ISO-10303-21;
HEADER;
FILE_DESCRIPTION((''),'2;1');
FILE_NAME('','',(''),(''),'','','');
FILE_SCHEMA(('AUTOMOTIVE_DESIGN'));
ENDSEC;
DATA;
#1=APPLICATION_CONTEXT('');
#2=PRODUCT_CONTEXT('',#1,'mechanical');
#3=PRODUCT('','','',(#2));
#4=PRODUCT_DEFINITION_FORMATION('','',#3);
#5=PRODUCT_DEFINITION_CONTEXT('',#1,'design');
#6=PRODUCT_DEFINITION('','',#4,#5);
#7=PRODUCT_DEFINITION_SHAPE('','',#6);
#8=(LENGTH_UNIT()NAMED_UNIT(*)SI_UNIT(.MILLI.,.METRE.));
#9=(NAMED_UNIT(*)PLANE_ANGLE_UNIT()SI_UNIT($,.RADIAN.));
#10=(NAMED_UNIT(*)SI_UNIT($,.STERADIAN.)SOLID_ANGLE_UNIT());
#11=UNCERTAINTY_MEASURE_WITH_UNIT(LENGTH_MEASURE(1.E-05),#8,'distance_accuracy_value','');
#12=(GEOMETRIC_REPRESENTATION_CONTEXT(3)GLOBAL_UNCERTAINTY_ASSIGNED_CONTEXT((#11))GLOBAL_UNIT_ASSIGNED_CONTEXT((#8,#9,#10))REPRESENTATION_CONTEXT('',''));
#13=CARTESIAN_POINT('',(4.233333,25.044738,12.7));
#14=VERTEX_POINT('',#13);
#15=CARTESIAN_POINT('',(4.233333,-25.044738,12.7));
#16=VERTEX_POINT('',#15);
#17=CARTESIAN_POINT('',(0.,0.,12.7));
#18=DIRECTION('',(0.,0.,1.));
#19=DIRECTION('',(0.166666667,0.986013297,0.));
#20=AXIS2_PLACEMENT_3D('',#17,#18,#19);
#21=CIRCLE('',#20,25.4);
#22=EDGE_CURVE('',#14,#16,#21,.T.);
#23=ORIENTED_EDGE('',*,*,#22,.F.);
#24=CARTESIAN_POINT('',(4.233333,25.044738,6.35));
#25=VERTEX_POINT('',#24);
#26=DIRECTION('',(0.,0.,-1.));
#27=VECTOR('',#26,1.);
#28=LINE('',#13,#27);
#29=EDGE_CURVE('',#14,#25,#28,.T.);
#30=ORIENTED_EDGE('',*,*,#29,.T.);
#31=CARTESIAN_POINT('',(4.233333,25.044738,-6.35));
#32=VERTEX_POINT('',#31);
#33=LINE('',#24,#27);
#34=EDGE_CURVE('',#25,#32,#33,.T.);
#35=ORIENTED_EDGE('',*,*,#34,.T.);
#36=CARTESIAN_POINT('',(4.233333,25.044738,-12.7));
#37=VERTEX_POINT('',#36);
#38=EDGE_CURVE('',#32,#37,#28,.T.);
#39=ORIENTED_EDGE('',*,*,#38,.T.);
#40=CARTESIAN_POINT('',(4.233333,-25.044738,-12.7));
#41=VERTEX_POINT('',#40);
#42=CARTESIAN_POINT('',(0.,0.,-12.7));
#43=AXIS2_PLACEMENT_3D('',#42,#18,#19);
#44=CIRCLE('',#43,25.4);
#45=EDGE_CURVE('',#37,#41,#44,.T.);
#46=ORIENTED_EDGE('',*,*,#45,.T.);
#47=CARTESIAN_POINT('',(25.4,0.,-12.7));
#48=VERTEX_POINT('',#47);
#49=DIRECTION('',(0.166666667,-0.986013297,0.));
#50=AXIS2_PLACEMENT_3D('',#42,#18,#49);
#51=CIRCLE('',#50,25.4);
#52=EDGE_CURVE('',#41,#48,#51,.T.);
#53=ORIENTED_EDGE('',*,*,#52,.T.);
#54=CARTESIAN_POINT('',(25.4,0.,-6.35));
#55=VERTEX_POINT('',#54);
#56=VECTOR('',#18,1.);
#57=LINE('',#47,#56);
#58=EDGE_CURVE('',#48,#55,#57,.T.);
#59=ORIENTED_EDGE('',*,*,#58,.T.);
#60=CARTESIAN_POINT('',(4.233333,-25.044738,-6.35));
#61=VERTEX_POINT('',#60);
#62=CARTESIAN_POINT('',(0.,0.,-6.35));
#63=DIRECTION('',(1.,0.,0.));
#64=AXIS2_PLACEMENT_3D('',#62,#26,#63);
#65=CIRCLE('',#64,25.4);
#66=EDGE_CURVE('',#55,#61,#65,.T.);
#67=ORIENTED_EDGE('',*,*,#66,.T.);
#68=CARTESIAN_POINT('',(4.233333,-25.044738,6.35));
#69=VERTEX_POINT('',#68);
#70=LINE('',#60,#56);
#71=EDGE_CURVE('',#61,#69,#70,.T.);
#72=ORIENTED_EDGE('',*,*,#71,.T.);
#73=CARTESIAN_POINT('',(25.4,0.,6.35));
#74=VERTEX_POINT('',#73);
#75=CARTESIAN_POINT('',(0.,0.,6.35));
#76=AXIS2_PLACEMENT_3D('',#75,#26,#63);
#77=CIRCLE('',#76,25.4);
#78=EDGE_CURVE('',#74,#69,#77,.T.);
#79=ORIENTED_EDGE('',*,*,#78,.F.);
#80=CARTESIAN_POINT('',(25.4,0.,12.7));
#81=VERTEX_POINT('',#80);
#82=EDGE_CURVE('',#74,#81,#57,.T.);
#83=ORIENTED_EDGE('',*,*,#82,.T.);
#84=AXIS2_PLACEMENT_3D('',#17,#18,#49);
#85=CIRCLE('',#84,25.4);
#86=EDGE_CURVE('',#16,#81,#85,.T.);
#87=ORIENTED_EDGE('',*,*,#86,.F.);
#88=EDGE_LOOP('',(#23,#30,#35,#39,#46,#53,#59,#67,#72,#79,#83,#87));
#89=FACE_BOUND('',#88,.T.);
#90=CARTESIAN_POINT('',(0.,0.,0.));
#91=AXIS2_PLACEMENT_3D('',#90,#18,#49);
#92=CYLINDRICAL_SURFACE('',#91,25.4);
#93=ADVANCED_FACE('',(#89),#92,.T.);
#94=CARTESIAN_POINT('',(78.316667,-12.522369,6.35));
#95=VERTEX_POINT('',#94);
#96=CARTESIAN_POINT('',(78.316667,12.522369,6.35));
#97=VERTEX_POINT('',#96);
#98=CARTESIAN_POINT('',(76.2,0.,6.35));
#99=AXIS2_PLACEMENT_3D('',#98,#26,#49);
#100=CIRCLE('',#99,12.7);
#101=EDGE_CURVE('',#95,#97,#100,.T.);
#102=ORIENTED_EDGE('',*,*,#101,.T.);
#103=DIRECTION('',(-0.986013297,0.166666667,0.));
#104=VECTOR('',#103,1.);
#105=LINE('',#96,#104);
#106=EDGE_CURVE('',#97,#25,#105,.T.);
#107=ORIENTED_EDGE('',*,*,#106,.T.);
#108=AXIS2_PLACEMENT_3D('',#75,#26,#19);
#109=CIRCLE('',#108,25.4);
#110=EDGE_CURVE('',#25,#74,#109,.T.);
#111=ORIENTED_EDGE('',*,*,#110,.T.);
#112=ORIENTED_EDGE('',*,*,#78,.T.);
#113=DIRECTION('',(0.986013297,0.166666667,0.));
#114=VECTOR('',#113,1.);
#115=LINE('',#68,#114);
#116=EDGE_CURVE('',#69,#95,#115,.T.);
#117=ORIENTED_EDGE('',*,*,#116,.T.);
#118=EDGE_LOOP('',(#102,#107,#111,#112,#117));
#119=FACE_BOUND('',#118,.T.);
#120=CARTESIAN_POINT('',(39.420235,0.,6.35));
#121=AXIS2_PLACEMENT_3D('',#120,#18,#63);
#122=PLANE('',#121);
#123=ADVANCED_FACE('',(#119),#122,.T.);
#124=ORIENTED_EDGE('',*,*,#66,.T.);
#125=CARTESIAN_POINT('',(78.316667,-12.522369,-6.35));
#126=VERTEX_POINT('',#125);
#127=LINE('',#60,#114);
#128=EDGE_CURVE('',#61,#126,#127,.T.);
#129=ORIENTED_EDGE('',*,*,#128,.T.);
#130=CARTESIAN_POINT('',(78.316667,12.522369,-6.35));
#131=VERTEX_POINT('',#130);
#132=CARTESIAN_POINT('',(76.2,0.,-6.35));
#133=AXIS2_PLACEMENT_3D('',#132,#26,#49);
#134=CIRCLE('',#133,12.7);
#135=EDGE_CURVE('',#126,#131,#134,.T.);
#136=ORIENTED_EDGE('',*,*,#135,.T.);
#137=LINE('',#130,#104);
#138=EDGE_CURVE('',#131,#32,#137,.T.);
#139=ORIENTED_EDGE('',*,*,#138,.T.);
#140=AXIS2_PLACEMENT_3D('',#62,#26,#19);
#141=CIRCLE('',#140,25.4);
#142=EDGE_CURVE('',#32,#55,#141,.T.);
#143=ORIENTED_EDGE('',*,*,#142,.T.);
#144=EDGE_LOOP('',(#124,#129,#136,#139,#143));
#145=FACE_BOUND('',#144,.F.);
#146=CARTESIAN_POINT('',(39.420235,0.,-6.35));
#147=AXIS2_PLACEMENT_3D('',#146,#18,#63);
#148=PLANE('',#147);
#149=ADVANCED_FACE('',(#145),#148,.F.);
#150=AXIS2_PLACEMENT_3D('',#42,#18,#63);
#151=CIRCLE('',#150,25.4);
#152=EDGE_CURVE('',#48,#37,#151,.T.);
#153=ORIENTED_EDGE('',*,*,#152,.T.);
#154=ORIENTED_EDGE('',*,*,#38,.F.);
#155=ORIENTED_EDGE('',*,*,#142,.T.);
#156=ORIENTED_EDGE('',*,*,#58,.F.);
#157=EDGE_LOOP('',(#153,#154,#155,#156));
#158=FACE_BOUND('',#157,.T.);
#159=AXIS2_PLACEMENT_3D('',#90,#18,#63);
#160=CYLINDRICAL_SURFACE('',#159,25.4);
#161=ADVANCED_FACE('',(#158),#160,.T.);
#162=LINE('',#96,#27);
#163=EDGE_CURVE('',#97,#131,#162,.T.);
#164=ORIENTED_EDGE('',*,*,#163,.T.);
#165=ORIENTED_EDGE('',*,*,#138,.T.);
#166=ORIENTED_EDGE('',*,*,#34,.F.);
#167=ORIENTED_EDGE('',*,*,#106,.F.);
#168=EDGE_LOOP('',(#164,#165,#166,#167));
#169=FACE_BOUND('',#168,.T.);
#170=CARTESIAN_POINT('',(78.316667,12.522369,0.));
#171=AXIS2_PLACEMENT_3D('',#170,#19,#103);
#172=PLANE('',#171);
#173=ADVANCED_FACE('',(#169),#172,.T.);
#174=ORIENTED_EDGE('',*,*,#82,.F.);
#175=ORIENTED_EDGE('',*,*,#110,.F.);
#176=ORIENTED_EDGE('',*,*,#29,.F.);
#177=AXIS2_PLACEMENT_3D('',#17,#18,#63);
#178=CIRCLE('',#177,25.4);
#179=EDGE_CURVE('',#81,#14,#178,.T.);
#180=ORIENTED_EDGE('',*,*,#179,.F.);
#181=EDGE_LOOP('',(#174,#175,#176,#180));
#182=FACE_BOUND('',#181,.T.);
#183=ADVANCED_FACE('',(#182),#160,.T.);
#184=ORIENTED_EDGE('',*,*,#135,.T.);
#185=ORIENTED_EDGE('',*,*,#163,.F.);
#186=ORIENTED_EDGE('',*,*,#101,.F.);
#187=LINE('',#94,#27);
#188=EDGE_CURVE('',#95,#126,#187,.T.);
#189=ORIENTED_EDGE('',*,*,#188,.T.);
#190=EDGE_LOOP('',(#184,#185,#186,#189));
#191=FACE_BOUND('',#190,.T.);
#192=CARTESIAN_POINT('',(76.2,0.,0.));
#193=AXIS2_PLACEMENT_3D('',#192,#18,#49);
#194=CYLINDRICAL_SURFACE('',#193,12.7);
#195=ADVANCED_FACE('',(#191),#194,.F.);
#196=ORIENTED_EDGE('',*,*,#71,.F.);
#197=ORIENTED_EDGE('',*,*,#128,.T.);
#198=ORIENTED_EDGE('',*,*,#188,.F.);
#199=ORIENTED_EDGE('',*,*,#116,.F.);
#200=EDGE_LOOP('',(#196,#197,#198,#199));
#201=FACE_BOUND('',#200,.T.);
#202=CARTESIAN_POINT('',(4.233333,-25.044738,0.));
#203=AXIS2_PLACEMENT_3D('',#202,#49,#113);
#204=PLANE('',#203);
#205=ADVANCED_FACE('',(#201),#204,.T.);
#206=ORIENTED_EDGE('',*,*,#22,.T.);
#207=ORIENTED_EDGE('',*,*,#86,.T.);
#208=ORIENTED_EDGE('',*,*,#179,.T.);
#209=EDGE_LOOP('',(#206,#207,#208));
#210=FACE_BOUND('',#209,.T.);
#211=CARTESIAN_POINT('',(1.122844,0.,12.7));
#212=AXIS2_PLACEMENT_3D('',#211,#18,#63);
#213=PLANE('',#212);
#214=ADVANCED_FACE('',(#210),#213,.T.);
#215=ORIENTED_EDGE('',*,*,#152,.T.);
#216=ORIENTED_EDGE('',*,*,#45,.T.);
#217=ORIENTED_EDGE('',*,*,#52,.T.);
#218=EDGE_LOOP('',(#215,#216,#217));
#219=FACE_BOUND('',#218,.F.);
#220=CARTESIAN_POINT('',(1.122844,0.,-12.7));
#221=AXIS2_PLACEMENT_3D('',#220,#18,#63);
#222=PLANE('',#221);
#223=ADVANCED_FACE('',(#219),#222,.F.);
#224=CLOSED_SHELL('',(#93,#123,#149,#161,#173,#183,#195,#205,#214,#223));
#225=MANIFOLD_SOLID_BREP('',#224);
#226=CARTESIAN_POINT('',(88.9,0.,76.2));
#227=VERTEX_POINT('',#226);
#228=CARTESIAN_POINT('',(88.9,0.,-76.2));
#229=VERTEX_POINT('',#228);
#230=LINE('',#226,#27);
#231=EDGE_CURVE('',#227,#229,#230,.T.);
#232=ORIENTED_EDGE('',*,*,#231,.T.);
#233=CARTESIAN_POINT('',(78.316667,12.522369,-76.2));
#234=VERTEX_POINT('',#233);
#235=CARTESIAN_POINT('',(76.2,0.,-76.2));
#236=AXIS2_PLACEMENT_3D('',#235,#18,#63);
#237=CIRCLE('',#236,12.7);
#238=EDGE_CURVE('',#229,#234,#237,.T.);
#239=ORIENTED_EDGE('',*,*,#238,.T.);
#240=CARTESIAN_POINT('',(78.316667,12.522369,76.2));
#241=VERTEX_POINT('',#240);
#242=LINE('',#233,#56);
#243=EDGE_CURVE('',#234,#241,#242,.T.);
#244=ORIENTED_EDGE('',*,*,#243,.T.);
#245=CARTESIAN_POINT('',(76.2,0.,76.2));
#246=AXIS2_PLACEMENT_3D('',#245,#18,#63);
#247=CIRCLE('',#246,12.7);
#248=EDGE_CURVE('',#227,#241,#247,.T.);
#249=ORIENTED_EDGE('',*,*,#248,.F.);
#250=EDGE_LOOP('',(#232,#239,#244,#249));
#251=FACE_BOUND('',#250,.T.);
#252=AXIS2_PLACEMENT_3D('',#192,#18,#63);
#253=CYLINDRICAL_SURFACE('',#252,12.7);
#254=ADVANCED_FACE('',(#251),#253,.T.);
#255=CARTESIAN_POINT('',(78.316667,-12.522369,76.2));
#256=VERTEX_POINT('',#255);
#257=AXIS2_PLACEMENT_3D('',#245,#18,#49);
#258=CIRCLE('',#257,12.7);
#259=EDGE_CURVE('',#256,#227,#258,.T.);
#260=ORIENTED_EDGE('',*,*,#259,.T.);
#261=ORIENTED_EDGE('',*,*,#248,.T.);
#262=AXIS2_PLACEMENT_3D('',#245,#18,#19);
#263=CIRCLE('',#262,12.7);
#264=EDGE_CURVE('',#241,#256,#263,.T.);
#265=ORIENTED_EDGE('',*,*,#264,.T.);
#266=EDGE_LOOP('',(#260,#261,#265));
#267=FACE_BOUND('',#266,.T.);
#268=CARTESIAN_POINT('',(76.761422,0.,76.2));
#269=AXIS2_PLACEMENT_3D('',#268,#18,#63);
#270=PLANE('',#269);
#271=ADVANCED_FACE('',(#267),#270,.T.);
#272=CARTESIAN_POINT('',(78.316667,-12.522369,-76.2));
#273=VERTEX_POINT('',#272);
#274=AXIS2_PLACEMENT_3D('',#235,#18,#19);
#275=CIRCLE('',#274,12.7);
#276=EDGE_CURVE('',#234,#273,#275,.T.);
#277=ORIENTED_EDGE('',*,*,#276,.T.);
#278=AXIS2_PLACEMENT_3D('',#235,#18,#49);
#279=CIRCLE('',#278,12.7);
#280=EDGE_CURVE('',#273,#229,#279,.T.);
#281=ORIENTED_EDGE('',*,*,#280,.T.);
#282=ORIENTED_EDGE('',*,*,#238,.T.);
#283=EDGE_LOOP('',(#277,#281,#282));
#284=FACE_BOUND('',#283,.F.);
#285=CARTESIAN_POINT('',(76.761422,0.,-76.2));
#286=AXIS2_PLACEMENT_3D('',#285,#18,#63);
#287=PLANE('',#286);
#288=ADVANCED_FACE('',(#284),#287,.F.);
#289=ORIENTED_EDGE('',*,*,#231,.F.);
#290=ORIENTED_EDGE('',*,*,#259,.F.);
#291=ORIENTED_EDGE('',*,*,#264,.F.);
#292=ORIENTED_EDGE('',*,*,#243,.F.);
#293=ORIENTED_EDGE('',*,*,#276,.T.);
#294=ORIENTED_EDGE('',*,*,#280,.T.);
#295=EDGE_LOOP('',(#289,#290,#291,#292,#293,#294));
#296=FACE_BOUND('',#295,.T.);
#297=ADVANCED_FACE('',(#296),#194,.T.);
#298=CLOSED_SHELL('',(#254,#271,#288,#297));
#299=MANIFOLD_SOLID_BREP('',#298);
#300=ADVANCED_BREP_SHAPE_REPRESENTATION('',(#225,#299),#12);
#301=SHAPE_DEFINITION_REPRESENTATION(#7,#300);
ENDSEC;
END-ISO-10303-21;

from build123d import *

# Parameters (mm, degrees)
F1_DEPTH = 12.7
F2_DEPTH = 6.35
F3_DEPTH = 76.2


# Not quite as in the source:
# - the program builds the solid bodies; features that only make, move or delete a surface that nothing else refers to are left out


with BuildPart() as f1:
    # F0 (on Top) → F1 (new body, symmetric)
    with BuildSketch(Plane.XY):
        with BuildLine():
            ThreePointArc((4.2333333333, -25.0447377485), (19.399570442, -16.3956294989), (25.4, 0))
            ThreePointArc((25.4, 0), (19.399570442, 16.3956294989), (4.2333333333, 25.0447377485))
            ThreePointArc((4.2333333333, 25.0447377485), (-25.4, 0), (4.2333333333, -25.0447377485))
        make_face()
    extrude(amount=F1_DEPTH, both=True)

    # F0 (on Top) → F2 (join, symmetric)
    with BuildSketch(Plane.XY):
        with BuildLine():
            ThreePointArc((4.2333333333, 25.0447377485), (19.399570442, 16.3956294989), (25.4, 0))
            ThreePointArc((25.4, 0), (19.399570442, -16.3956294989), (4.2333333333, -25.0447377485))
            Line((4.2333333333, -25.0447377485), (78.3166666667, -12.5223688742))
            ThreePointArc((78.3166666667, -12.5223688742), (63.5, 0), (78.3166666667, 12.5223688742))
            Line((78.3166666667, 12.5223688742), (4.2333333333, 25.0447377485))
        make_face()
    extrude(amount=F2_DEPTH, both=True)


with BuildPart() as f3:
    # F0 (on Top) → F3 (new body, symmetric)
    with BuildSketch(Plane.XY):
        with BuildLine():
            ThreePointArc((88.9, 0), (85.899785221, 8.1978147495), (78.3166666667, 12.5223688742))
            ThreePointArc((78.3166666667, 12.5223688742), (63.5, 0), (78.3166666667, -12.5223688742))
            ThreePointArc((78.3166666667, -12.5223688742), (85.899785221, -8.1978147495), (88.9, 0))
        make_face()
    extrude(amount=F3_DEPTH, both=True)


solid = Compound([f1.part, f3.part])
